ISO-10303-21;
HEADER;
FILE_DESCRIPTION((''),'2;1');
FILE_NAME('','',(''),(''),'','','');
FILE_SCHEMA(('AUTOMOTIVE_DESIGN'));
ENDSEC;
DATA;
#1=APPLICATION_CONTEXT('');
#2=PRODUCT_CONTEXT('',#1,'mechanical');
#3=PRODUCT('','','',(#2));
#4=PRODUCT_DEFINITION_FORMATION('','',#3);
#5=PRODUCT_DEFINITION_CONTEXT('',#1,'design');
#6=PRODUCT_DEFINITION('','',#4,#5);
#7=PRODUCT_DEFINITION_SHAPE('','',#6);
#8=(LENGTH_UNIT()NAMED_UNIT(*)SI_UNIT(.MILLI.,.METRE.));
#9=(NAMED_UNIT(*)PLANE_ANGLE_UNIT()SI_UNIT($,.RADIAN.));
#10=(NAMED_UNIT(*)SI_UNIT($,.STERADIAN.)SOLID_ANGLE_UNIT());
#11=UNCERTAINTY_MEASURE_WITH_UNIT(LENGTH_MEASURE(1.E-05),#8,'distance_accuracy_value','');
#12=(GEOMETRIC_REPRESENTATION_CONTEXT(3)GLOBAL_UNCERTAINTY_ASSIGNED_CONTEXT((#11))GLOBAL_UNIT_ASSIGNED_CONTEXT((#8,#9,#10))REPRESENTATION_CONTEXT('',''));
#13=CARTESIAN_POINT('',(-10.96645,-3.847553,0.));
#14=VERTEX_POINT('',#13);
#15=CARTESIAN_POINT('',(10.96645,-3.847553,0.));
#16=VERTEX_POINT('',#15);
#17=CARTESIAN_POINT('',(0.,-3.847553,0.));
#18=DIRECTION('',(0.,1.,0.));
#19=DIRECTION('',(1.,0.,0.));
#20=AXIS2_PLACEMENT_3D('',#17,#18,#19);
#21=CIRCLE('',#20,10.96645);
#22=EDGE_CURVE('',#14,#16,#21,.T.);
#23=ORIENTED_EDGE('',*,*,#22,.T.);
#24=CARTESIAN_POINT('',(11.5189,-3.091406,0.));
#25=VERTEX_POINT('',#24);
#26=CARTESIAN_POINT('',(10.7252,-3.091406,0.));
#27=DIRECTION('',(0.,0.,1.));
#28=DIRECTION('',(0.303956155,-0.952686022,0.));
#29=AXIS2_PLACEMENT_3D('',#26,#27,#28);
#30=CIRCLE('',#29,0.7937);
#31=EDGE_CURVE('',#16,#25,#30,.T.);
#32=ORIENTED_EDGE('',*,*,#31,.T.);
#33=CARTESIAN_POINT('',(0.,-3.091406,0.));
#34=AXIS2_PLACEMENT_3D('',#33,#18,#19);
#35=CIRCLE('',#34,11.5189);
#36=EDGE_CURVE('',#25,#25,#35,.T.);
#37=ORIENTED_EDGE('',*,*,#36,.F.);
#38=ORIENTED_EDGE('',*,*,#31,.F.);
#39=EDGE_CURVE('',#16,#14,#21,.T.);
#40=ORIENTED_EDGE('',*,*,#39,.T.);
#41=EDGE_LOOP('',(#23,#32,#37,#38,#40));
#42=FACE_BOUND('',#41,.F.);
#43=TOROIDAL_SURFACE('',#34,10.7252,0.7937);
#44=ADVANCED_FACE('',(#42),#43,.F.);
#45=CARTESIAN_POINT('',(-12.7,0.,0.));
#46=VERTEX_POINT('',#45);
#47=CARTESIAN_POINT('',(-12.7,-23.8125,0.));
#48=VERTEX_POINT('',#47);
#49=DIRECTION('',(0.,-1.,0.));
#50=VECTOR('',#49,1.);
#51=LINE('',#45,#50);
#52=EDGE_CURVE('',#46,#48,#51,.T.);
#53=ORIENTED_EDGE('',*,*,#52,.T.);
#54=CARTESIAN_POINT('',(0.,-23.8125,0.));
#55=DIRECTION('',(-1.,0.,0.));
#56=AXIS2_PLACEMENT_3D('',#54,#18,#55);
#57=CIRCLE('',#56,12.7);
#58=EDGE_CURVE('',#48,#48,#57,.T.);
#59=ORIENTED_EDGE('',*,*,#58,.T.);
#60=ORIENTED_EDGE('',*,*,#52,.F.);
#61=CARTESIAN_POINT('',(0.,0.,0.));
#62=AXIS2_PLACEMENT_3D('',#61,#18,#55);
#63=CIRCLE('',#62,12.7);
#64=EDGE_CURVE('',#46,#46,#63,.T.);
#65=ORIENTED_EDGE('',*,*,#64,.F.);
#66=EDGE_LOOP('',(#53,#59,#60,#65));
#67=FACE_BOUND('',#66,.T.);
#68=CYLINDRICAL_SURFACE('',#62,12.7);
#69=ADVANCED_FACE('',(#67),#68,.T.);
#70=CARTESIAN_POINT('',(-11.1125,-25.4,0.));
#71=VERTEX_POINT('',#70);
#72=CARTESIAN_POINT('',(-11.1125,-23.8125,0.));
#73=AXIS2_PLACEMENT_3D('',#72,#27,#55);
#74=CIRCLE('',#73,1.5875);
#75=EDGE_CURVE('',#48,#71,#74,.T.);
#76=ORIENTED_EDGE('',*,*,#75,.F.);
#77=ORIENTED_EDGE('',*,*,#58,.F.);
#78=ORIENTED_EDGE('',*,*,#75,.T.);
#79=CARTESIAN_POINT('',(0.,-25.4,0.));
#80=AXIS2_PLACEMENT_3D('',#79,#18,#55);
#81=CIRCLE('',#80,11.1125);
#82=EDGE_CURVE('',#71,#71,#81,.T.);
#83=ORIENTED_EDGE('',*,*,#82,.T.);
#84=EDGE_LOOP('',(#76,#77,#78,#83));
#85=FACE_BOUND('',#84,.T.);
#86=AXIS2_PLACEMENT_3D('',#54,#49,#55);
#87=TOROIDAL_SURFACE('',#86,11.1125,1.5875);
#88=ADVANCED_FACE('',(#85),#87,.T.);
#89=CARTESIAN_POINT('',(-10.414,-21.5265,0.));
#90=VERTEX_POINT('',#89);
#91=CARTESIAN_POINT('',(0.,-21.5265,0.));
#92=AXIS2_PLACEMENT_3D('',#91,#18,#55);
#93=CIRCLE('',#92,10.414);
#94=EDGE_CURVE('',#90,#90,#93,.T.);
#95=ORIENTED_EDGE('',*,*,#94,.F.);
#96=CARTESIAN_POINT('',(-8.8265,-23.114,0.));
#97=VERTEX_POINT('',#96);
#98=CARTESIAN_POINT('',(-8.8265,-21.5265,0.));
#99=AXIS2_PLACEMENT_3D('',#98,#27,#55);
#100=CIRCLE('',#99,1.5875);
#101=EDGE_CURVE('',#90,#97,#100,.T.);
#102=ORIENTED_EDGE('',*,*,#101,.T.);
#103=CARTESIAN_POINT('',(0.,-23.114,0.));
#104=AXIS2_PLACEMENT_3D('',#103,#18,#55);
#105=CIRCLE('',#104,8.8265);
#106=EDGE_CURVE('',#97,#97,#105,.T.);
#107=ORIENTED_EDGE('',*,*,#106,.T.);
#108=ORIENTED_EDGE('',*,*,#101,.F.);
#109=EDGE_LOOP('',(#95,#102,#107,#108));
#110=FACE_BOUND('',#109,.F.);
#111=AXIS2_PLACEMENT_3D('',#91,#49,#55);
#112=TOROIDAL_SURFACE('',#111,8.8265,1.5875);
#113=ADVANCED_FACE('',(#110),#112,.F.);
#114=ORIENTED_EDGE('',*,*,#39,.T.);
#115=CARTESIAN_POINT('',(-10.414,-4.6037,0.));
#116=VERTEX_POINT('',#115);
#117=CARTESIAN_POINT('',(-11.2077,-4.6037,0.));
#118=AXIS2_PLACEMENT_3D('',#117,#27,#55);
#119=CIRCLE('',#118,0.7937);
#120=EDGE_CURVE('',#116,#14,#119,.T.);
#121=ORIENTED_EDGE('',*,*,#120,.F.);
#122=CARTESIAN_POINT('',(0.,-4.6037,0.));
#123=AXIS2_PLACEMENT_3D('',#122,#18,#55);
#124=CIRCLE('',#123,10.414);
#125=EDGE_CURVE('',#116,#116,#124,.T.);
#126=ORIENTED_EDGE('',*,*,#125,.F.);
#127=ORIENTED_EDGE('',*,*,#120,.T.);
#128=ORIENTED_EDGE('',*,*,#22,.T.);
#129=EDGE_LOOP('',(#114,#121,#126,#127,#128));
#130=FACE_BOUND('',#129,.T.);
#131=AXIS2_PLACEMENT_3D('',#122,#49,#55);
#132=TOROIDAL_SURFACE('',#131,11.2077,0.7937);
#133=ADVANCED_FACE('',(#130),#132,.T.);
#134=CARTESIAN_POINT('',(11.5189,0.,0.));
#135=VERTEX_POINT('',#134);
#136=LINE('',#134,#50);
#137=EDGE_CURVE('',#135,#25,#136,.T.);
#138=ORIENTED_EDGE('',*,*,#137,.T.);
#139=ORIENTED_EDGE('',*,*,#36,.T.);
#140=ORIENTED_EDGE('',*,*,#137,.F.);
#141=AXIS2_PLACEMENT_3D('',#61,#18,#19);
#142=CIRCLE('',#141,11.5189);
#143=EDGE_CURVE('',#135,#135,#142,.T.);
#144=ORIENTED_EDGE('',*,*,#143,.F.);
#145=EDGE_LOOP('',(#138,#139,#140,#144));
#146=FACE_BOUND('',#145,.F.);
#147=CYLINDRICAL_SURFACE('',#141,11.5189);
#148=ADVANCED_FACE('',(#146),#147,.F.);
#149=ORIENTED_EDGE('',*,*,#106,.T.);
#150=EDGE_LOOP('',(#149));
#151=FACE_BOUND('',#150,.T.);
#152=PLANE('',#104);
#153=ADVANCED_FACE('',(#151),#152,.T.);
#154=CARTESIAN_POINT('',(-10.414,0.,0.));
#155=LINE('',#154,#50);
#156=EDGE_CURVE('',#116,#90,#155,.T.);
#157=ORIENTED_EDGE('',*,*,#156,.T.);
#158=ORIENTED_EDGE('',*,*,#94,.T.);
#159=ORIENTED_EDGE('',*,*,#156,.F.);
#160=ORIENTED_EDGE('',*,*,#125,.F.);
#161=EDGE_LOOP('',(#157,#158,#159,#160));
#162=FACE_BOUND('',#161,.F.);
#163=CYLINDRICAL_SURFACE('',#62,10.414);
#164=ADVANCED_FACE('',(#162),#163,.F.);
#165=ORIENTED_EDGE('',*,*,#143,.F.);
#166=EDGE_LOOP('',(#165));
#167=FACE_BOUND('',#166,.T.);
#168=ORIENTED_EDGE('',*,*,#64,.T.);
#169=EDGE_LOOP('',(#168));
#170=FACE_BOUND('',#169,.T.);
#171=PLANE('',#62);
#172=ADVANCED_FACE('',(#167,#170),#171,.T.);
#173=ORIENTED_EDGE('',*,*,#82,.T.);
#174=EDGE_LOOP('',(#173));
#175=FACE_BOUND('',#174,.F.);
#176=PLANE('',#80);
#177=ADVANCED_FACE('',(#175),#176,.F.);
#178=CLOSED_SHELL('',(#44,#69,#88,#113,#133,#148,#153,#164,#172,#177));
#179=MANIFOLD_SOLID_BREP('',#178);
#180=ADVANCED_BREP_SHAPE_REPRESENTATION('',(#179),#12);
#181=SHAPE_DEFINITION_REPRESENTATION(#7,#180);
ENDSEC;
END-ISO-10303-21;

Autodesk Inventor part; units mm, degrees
ref_plane "YZ Plane" through (0, 0, 0) normal (1, 0, 0) x (0, 1, 0)
ref_plane "XZ Plane" through (0, 0, 0) normal (0, 1, 0) x (-1, 0, 0)
ref_plane "XY Plane" through (0, 0, 0) normal (0, 0, 1) x (1, 0, 0)
sketch "Sketch1" plane through (0, 0, 0) normal (0, 1, 0) x (-1, 0, 0)
  circle A0 centre (0, 0) radius 12.7
  dimension "d1" = 25.4
extrude "Extrusion1" add sketch "Sketch1" against normal blind 25.4
shell "Shell1" thickness 2.286 removed faces 1 at (-0.1664, 0, 2.8072)
sketch "Sketch2" plane through (0, 0, 0) normal (0, 1, 0) x (1, 0, 0)
  circle A0 centre (0, 0) radius 11.5189
  dimension "d5" = 23.0378
extrude "Extrusion2" cut sketch "Sketch2" against normal blind 3.81
fillet "Fillet1" radius 1.5875 1 edges at (12.7, -25.4, 0)
fillet "Fillet2" radius 1.5875 1 edges at (10.414, -23.114, 0)
fillet "Fillet3" radius 0.7937 1 edges at (10.414, -3.81, 0)
fillet "Fillet4" radius 0.7937 1 edges at (-11.5189, -3.81, 0)
properties part number "Bolt Cap"
